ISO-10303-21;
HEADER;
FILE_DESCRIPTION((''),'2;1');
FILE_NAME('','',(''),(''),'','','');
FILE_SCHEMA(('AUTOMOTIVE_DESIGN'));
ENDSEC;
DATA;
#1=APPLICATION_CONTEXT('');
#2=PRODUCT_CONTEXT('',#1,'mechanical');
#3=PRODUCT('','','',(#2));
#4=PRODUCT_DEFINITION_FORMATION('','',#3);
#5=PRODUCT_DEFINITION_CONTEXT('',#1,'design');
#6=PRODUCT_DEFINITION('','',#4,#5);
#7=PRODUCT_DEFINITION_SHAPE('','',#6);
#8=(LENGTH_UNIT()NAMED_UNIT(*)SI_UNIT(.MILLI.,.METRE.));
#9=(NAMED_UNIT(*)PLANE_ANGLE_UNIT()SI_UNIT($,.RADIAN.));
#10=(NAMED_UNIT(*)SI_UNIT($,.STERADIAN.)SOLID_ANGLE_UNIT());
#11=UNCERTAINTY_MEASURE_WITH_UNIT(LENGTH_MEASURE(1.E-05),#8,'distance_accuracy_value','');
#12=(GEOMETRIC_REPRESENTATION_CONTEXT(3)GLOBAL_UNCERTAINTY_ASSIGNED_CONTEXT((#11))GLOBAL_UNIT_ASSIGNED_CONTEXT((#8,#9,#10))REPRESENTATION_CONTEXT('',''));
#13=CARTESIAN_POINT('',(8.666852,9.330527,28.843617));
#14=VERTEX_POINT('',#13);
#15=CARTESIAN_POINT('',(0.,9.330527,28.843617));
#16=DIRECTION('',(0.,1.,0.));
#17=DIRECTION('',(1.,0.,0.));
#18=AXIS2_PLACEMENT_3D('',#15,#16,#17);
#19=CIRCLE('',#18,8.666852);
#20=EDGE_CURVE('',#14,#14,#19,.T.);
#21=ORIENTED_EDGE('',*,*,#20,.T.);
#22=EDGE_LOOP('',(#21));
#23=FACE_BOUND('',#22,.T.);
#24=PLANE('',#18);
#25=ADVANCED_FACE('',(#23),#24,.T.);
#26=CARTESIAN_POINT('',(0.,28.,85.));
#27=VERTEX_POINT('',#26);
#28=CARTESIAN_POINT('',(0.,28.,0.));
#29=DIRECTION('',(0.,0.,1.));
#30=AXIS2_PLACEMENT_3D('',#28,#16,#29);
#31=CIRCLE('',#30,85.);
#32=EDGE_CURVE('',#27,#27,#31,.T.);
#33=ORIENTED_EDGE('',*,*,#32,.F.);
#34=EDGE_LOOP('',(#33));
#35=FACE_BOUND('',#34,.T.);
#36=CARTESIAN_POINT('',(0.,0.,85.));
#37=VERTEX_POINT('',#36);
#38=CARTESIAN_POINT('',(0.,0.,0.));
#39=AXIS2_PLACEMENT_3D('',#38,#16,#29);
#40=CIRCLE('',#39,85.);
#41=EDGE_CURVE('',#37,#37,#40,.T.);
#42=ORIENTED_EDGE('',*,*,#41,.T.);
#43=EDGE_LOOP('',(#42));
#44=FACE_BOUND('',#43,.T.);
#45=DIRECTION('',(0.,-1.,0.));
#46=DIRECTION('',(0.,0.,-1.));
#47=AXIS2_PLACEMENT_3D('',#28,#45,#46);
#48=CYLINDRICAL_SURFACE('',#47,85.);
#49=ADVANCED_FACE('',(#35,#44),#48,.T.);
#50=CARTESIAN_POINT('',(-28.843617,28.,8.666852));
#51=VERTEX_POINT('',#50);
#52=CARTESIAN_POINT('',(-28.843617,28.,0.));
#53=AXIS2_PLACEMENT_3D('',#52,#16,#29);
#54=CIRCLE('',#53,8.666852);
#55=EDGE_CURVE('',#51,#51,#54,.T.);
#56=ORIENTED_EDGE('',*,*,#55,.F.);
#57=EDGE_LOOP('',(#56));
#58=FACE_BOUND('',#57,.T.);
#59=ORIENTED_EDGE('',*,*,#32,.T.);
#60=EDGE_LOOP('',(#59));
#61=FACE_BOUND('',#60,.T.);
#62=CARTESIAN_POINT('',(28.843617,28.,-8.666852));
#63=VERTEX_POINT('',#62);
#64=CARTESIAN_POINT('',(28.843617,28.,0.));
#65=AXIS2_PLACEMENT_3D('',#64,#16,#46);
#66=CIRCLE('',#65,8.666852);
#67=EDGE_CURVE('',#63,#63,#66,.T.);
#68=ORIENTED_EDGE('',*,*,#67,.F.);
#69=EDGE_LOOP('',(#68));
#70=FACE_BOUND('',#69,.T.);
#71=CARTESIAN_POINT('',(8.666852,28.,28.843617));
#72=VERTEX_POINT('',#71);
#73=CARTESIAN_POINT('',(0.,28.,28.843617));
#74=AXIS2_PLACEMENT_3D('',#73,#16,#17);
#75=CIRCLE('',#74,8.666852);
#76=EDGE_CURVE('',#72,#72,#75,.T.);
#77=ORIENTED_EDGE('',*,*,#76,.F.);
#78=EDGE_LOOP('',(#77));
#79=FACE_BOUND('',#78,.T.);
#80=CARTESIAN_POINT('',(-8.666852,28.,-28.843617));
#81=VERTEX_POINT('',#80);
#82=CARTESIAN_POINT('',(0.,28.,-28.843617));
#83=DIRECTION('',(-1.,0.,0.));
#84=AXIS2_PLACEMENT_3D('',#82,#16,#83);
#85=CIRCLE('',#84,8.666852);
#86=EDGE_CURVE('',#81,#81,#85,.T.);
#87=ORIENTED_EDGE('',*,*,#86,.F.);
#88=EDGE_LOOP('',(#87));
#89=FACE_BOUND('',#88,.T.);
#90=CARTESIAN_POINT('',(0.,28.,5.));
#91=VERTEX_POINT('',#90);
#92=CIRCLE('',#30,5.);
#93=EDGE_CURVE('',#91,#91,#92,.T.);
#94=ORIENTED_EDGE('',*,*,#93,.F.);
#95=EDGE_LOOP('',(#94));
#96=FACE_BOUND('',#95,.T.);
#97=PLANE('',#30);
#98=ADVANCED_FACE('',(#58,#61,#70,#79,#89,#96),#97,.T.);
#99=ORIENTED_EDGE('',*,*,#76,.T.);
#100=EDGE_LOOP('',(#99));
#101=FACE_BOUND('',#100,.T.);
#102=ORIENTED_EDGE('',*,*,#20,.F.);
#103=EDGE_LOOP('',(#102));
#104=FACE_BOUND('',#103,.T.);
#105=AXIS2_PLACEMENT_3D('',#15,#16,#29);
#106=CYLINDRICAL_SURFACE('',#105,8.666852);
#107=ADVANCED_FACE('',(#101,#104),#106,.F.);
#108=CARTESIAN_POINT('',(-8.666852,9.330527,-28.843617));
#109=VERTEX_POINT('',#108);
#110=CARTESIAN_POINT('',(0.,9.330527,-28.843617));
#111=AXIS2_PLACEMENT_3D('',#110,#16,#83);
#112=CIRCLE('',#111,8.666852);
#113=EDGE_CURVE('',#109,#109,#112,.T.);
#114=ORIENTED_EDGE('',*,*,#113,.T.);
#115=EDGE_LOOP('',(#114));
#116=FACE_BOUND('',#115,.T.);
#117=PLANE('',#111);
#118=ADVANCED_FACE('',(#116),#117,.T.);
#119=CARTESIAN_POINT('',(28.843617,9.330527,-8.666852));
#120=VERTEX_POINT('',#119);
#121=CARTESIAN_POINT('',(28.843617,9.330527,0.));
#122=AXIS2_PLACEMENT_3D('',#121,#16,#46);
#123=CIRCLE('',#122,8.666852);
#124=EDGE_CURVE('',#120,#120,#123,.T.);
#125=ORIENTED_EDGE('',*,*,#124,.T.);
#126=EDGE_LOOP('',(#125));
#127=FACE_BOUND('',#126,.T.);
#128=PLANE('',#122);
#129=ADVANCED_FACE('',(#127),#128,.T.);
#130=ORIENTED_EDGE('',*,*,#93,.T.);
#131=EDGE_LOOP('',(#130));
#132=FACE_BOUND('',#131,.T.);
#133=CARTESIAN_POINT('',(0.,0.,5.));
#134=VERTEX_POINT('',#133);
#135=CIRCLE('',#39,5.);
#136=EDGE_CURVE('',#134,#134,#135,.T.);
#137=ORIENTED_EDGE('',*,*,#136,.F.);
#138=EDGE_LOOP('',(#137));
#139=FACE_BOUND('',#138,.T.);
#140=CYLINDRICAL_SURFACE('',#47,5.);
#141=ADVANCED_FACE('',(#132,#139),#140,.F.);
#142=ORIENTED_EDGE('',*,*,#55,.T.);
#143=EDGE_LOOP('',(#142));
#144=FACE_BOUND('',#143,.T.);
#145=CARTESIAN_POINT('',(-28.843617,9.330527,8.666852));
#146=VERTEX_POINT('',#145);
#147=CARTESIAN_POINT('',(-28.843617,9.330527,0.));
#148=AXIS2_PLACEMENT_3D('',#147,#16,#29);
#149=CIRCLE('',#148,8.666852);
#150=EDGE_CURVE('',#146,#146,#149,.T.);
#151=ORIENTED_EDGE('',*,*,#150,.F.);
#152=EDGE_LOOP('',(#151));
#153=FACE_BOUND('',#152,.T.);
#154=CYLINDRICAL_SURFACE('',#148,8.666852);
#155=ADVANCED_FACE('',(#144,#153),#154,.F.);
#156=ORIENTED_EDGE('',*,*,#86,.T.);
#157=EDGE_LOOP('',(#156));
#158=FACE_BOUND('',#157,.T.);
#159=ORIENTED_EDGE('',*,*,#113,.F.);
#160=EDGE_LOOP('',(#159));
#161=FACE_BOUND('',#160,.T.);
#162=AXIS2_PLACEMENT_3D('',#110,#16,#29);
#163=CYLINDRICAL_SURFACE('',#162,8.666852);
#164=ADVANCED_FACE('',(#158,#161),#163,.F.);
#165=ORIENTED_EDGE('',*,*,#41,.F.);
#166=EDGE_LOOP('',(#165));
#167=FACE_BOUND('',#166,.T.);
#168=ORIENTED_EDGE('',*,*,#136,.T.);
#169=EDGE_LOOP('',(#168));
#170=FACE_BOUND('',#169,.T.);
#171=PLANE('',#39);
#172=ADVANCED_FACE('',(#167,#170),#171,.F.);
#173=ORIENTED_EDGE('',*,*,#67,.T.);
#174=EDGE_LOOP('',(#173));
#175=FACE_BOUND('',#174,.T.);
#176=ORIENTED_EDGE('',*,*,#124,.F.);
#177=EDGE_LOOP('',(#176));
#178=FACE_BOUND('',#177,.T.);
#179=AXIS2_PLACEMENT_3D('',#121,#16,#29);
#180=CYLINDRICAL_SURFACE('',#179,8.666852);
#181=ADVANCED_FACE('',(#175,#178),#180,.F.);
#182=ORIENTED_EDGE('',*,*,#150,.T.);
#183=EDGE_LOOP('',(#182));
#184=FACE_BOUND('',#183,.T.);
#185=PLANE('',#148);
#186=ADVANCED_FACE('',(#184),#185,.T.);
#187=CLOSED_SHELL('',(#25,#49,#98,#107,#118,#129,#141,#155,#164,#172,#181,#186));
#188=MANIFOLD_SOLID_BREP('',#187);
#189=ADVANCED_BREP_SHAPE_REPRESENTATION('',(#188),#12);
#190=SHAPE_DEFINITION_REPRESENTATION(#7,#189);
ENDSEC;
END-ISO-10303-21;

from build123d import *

# Parameters (mm, degrees)
SKETCH1_R           = 85
BOSS_EXTRUDE1_DEPTH = 28
SKETCH2_R           = 5
CUT_EXTRUDE1_DEPTH  = 124.426091245
SKETCH3_R           = 8.666851531
CUT_EXTRUDE2_DEPTH  = 18.669472941
CIRPATTERN1_COUNT   = 4


with BuildPart() as part:
    # Sketch1 → Boss-Extrude1 (new body)
    with BuildSketch(Plane(origin=(0, 0, 0), x_dir=(1, 0, 0), z_dir=(0, 1, 0))):
        Circle(SKETCH1_R)
    extrude(amount=BOSS_EXTRUDE1_DEPTH)

    # Sketch2 → Cut-Extrude1 (cut, through all)
    with BuildSketch(Plane(origin=(0, 0, 0), x_dir=(1, 0, 0), z_dir=(0, 1, 0))):
        Circle(SKETCH2_R)
    extrude(amount=CUT_EXTRUDE1_DEPTH, mode=Mode.SUBTRACT)

    # Sketch3 → Cut-Extrude2 (cut)
    with BuildSketch(Plane(origin=(0, 28, 0), x_dir=(1, 0, 0), z_dir=(0, 1, 0))):
        with Locations((-28.843617094, 0)):
            Circle(SKETCH3_R)
    cut_extrude2 = extrude(amount=-CUT_EXTRUDE2_DEPTH, mode=Mode.SUBTRACT)

    # CirPattern1: Cut-Extrude2 ×4 about axis
    cirpattern1_axis = Axis((0, 0, 0), (0, 1, 0))
    for i in range(1, CIRPATTERN1_COUNT):
        add(cut_extrude2.rotate(cirpattern1_axis, i * 360 / CIRPATTERN1_COUNT), mode=Mode.SUBTRACT)


solid = part.part
